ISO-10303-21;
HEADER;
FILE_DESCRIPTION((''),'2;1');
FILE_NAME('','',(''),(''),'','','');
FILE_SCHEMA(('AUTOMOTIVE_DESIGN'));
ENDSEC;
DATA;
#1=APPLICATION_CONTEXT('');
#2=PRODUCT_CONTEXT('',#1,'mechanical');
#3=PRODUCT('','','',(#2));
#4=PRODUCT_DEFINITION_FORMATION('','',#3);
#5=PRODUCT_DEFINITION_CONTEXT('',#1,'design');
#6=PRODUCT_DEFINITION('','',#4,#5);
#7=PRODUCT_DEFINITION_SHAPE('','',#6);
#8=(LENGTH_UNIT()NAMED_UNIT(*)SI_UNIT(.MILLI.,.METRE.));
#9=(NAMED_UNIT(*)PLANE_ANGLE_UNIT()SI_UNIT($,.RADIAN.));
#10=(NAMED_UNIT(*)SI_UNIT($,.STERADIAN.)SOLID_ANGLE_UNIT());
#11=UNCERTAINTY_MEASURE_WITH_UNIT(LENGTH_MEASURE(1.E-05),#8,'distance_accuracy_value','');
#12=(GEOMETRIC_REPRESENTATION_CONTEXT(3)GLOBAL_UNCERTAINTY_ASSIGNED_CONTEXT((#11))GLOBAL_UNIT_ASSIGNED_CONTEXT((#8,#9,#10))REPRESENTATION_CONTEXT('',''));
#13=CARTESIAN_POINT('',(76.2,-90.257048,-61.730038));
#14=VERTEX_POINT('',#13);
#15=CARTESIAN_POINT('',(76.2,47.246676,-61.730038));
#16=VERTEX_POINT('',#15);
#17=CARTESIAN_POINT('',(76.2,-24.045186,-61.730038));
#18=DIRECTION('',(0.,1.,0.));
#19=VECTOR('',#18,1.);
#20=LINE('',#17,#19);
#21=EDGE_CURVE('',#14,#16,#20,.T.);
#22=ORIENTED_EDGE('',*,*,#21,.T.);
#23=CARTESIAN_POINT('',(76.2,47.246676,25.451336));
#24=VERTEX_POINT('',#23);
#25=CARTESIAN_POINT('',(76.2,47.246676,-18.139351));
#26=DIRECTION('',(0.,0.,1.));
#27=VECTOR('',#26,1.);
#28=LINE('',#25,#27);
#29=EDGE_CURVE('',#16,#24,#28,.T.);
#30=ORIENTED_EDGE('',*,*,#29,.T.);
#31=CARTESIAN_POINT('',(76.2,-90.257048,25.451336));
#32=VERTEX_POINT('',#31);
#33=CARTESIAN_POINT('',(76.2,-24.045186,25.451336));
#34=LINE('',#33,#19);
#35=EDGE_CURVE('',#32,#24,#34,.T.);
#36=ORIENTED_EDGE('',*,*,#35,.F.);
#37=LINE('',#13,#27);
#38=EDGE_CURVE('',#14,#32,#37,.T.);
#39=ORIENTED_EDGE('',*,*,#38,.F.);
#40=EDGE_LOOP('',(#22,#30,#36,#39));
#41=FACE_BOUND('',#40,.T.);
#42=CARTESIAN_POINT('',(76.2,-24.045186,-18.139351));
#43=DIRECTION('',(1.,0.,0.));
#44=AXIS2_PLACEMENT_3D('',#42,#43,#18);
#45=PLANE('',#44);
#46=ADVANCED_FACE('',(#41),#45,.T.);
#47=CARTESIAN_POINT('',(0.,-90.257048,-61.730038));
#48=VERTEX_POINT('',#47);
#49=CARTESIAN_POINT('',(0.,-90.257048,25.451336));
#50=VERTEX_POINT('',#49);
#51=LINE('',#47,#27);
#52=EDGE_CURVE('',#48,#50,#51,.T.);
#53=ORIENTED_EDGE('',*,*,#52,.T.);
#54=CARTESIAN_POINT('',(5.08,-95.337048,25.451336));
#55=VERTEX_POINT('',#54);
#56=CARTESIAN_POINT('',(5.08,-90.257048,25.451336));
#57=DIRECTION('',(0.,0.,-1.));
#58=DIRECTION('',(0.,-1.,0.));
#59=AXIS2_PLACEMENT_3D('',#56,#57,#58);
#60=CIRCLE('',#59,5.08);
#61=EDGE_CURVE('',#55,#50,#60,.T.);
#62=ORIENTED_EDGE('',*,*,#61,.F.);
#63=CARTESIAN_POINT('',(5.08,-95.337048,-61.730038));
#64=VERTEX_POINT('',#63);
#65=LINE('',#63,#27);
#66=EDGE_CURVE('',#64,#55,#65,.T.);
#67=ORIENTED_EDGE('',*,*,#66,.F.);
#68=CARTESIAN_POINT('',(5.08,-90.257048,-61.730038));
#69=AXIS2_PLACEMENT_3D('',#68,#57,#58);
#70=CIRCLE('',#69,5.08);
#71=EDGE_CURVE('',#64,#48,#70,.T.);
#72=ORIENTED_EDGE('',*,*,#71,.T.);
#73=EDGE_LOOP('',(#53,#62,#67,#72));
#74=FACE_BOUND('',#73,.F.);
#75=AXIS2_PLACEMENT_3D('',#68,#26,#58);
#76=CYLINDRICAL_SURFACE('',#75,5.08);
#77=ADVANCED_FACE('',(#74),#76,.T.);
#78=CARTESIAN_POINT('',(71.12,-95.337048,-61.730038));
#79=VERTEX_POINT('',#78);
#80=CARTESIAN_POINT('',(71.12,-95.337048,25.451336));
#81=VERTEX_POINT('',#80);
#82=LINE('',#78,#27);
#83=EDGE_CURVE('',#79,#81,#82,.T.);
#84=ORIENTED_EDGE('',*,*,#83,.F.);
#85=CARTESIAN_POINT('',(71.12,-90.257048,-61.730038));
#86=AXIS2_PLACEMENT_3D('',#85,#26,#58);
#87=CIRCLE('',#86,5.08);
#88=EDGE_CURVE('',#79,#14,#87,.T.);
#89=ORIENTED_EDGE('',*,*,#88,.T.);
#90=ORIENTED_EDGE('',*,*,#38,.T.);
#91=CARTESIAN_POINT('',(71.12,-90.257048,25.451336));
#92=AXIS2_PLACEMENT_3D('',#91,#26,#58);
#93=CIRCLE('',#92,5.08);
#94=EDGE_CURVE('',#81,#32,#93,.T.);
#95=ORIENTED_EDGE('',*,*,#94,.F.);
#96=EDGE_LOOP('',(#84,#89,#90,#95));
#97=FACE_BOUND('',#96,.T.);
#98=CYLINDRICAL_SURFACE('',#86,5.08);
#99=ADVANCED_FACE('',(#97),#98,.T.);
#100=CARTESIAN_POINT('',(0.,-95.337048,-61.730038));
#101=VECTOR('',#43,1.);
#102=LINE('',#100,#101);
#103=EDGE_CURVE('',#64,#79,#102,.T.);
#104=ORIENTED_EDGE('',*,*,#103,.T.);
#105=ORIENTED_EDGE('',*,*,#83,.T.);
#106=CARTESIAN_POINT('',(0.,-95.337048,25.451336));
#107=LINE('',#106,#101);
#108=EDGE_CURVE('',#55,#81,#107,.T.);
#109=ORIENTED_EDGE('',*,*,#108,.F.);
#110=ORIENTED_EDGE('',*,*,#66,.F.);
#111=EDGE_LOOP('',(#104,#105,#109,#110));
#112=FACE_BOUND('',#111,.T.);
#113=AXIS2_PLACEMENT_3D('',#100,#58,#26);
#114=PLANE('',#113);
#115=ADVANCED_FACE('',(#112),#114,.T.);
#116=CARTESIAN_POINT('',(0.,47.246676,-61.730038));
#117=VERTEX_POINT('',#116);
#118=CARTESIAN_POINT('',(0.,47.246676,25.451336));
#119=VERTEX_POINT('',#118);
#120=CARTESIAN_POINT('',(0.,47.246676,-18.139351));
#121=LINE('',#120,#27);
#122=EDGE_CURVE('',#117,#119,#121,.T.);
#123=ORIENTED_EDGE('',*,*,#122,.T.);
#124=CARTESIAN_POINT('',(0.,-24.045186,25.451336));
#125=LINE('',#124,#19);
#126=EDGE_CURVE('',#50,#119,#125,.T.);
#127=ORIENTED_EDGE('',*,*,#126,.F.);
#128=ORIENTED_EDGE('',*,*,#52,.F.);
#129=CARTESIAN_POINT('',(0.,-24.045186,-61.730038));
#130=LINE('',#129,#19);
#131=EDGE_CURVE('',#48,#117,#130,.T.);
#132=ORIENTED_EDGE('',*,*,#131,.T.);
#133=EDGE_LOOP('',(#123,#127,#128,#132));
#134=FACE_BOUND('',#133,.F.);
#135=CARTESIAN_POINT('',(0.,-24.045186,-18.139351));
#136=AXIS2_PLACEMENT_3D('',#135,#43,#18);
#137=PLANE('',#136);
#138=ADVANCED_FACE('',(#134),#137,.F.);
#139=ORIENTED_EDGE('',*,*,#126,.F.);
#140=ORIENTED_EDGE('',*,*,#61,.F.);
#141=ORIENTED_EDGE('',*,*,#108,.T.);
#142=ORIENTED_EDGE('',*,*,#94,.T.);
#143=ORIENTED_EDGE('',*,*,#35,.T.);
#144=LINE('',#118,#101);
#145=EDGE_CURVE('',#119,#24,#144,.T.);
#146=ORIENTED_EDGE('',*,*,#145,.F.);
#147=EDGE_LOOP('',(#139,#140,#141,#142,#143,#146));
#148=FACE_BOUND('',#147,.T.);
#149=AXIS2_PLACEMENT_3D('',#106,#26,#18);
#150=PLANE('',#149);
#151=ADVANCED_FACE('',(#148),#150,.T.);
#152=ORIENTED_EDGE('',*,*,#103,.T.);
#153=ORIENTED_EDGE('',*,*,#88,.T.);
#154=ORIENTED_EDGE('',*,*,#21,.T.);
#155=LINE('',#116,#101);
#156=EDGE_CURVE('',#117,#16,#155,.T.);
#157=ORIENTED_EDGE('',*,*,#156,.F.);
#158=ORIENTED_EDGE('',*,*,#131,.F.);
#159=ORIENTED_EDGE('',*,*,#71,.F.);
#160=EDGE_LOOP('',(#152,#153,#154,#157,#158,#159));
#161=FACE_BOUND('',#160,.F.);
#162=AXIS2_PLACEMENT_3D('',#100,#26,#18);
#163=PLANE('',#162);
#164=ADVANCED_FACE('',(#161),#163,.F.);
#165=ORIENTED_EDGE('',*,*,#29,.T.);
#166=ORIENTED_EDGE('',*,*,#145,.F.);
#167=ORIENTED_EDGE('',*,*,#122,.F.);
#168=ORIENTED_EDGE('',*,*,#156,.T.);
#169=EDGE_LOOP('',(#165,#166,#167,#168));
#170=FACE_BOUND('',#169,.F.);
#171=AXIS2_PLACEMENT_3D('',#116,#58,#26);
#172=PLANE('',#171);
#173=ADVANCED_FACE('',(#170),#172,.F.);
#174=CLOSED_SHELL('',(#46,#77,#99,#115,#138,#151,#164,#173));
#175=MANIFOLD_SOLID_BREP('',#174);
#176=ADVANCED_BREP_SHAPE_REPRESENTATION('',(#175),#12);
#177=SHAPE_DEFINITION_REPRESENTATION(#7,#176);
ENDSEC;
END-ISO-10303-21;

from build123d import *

# Parameters (mm, degrees)
F2_W     = 142.5837241113
F2_H     = 87.1813744307
F3_DEPTH = 76.2
F4_R     = 5.08


# Not quite as in the source:
# - a feature of the source that left no trace in its solid (it failed there, or was rolled back) is left out


with BuildPart() as f3:
    # F2 (on Right) → F3 (new body)
    with BuildSketch(Plane.YZ):
        with Locations((-24.0451861173, -18.1393511593)):
            Rectangle(F2_W, F2_H)
    extrude(amount=F3_DEPTH)

    # F4
    f4_edges = [f3.edges().sort_by_distance(p)[0] for p in [
        (0, -95.337048, -18.139351),
        (76.2, -95.337048, -18.139351),
    ]]
    fillet(f4_edges, radius=F4_R)


solid = f3.part
